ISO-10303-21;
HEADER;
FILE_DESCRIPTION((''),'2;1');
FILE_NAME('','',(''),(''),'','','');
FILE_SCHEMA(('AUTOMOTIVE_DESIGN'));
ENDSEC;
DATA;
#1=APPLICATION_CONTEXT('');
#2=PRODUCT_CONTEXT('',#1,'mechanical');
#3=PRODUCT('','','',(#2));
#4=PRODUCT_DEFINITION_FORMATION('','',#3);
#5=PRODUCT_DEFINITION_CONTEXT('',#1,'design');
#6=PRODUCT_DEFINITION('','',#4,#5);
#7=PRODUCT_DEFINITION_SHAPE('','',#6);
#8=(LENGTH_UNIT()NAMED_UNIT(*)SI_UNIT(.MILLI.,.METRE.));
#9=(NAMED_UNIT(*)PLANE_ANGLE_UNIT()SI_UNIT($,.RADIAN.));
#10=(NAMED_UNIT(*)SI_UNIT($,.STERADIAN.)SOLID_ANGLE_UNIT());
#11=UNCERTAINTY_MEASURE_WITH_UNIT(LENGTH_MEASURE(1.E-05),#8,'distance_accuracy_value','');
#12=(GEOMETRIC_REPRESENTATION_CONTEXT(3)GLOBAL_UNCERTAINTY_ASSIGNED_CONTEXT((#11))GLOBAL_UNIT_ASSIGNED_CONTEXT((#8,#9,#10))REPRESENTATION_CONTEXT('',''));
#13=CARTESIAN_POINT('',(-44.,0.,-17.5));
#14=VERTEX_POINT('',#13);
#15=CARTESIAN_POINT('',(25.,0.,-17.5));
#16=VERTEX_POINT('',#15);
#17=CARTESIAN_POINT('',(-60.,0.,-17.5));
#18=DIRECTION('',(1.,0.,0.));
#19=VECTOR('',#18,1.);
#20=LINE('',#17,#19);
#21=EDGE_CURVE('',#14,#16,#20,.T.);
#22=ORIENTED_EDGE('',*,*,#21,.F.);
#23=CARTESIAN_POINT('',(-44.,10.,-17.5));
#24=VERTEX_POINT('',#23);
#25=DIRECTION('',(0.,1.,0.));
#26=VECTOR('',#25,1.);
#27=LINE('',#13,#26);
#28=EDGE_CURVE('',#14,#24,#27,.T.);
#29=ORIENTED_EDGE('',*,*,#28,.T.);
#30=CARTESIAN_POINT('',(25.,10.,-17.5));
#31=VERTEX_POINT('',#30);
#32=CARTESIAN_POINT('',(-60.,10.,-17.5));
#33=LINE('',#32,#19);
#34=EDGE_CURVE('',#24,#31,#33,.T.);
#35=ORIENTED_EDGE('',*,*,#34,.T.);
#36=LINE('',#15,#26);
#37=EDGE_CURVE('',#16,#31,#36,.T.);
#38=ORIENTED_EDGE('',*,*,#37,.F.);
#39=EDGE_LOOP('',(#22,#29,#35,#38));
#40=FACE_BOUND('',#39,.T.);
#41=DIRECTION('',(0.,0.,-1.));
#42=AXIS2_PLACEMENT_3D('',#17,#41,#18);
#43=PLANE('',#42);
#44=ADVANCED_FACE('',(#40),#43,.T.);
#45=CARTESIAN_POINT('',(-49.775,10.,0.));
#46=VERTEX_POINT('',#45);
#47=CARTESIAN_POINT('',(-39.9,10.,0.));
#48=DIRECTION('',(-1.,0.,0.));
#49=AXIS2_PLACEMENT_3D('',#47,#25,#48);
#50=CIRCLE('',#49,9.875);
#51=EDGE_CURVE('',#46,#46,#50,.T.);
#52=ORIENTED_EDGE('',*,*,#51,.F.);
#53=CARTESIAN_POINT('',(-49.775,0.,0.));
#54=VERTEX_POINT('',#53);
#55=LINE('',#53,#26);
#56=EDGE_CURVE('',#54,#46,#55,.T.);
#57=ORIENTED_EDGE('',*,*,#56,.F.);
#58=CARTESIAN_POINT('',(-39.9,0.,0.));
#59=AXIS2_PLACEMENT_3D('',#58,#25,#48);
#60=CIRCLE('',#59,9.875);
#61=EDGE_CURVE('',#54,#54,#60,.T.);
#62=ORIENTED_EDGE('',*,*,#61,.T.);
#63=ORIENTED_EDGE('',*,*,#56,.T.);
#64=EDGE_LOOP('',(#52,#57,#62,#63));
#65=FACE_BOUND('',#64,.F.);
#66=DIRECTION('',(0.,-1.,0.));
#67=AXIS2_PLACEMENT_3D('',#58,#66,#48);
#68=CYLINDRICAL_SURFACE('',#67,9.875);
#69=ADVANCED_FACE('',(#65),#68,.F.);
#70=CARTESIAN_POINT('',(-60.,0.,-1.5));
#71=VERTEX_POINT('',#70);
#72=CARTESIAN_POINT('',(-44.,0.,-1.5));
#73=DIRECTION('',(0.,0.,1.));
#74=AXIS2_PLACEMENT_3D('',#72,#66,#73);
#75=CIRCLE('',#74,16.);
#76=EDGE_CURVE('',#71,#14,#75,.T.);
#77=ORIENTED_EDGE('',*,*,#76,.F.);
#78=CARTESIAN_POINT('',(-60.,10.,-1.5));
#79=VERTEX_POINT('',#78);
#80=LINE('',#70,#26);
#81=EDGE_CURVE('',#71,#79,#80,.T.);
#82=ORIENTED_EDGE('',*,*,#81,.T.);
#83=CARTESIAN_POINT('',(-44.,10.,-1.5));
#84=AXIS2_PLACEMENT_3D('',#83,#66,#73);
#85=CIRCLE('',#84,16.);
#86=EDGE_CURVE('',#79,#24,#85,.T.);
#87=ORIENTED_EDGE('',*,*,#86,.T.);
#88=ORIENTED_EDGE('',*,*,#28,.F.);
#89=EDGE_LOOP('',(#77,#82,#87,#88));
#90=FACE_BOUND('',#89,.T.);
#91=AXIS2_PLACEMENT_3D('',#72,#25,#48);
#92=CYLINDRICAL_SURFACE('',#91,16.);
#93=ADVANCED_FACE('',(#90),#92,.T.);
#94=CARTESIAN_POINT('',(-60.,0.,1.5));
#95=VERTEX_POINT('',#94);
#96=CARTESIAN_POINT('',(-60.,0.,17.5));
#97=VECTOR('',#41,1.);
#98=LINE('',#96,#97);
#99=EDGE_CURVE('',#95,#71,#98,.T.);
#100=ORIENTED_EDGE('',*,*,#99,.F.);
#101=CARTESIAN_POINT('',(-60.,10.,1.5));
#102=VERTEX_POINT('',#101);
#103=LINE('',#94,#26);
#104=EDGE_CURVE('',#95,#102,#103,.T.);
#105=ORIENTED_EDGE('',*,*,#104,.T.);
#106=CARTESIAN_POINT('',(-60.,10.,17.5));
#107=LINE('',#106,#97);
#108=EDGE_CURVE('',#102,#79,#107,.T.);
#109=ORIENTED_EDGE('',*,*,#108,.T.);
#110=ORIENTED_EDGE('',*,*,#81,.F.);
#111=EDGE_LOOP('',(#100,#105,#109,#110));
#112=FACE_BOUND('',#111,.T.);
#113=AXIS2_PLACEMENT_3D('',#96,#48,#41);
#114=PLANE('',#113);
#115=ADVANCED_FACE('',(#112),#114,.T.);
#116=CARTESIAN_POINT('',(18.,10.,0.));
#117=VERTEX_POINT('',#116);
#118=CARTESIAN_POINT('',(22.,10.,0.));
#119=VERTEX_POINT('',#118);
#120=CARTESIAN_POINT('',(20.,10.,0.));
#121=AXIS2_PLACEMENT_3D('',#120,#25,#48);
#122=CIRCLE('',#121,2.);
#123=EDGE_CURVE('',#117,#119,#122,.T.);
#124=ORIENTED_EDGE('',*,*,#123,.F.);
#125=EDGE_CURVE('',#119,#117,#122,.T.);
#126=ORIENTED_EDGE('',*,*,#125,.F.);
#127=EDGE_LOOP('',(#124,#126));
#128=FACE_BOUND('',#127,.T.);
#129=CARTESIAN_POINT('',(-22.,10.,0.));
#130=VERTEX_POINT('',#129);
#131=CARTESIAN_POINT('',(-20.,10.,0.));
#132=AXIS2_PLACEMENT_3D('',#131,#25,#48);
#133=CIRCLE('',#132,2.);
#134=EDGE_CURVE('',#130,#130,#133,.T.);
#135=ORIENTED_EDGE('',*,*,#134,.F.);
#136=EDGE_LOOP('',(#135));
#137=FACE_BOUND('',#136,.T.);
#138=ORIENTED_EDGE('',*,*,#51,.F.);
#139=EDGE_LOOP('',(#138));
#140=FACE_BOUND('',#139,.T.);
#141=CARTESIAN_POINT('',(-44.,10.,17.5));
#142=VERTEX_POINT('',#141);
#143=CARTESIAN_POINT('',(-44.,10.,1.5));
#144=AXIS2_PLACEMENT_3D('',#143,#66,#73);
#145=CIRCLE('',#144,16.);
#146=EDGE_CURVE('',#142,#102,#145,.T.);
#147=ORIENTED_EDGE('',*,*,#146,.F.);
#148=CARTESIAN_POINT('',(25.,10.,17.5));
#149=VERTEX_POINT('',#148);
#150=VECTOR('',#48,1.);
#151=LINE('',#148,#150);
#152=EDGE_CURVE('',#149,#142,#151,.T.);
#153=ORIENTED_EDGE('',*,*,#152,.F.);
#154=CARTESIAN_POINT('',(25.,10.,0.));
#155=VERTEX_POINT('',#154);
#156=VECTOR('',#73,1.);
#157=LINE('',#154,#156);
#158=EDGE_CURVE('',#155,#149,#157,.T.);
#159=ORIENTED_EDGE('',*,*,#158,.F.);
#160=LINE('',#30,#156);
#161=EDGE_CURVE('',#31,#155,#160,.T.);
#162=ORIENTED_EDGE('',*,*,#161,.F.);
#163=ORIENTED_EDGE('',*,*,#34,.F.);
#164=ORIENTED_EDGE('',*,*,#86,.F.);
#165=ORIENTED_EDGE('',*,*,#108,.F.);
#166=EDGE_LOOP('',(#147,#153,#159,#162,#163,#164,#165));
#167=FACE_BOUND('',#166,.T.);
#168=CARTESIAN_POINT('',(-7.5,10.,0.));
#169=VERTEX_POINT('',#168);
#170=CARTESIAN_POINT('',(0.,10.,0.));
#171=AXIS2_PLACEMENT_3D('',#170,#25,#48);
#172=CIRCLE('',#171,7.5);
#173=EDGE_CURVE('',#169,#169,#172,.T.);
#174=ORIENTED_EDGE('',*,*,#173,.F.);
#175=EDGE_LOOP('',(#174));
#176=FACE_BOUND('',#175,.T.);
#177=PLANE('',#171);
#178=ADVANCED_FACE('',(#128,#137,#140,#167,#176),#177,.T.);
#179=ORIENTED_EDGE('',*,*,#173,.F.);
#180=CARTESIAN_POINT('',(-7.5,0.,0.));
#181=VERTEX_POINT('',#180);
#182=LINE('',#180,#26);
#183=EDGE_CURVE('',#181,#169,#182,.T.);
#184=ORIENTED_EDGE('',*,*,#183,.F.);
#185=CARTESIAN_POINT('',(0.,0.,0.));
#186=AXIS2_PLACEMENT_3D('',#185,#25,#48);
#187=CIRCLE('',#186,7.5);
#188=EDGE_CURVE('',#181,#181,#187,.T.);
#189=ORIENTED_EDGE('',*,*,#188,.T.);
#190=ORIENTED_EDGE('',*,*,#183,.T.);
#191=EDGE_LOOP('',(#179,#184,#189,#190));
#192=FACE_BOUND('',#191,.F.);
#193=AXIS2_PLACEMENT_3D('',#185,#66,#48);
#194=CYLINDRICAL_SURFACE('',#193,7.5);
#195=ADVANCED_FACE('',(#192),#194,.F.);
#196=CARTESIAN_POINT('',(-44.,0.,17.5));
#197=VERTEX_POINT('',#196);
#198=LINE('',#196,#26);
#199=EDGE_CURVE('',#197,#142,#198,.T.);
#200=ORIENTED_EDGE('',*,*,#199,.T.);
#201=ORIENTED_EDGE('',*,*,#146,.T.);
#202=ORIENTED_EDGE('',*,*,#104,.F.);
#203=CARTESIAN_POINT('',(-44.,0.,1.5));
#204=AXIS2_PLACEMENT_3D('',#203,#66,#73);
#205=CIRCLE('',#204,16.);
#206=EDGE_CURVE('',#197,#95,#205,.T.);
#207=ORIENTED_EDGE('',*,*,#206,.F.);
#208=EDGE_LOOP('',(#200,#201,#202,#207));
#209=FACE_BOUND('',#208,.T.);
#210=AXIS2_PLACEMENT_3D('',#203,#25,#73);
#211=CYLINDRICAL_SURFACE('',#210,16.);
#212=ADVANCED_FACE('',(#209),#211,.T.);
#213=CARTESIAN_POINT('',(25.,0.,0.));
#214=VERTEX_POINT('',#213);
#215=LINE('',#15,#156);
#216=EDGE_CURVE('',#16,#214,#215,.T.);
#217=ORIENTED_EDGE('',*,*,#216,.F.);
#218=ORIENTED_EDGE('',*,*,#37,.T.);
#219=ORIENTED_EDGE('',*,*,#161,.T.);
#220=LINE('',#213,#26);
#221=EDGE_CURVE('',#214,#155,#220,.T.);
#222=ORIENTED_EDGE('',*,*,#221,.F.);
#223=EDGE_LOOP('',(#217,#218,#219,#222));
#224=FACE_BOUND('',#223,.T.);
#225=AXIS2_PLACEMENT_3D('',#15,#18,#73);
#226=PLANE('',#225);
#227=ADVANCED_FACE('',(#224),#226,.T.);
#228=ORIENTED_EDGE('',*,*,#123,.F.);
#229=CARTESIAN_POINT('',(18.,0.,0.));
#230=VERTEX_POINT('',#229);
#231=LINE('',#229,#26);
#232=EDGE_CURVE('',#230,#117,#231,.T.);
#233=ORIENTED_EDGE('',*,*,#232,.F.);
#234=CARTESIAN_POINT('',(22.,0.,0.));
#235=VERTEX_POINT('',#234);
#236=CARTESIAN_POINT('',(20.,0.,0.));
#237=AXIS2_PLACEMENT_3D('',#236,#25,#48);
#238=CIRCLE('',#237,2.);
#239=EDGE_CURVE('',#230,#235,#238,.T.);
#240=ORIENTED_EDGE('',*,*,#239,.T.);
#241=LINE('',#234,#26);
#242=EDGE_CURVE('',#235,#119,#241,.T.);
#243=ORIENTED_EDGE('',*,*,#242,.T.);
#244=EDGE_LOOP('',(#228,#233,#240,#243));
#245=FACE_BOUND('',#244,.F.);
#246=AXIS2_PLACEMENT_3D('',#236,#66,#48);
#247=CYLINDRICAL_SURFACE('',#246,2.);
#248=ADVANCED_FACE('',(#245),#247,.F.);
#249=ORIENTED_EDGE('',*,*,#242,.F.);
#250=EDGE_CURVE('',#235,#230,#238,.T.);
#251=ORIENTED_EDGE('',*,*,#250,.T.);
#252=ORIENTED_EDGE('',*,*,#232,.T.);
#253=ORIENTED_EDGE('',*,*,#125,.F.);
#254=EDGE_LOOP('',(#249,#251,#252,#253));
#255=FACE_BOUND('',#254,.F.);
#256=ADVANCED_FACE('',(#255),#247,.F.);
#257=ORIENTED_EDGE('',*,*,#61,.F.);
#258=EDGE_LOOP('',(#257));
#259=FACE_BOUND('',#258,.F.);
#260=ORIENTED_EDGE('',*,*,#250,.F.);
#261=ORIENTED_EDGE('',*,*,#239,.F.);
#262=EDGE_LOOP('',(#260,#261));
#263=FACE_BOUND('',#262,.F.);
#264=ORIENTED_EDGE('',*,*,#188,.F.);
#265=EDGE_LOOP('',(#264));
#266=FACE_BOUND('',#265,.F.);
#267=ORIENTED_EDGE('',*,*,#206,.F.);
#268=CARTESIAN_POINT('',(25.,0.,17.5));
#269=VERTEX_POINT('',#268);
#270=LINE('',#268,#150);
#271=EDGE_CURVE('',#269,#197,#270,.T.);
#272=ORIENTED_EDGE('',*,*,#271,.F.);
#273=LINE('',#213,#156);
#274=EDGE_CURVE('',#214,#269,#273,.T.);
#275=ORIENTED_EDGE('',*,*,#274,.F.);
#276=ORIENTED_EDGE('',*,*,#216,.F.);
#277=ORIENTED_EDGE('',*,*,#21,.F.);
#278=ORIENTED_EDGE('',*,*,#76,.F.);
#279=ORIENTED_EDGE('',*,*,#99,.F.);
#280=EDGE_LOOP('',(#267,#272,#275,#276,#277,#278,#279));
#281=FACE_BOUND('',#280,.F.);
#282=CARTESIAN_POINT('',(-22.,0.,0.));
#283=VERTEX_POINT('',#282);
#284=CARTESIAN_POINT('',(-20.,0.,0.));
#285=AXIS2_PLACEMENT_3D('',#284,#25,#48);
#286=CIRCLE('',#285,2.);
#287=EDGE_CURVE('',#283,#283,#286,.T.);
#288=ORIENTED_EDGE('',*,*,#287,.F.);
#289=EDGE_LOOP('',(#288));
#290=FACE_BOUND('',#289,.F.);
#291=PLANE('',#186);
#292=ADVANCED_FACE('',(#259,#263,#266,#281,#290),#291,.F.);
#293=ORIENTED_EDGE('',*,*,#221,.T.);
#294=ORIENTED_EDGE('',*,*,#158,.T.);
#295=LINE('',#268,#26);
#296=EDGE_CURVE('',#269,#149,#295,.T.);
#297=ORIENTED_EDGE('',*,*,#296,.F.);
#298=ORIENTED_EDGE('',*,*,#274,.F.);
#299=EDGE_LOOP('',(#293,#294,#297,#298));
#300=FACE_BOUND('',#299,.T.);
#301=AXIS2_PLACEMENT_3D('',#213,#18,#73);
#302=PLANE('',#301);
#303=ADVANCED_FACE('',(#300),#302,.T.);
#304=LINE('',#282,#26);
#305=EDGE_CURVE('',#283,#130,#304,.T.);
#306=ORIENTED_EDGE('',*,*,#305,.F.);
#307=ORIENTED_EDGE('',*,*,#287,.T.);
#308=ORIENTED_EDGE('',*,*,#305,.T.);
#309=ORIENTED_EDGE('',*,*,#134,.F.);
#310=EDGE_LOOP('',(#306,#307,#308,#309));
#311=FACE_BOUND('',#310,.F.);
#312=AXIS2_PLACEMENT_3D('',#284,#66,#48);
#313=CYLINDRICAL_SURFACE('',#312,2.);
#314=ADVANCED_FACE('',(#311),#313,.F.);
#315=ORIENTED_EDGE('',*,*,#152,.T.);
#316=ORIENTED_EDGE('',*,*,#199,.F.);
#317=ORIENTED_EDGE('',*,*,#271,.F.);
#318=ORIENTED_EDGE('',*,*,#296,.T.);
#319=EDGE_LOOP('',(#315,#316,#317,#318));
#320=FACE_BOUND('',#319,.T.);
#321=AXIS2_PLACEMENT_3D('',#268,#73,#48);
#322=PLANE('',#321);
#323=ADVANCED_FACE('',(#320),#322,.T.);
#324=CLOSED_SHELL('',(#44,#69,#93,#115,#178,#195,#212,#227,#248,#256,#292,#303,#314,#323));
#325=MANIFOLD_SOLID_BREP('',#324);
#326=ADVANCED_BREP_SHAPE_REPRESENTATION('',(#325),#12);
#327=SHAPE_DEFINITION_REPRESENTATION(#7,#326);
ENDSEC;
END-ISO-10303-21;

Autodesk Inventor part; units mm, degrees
ref_plane "YZ Plane" through (0, 0, 0) normal (1, 0, 0) x (0, 1, 0)
ref_plane "XZ Plane" through (0, 0, 0) normal (0, 1, 0) x (-1, 0, 0)
ref_plane "XY Plane" through (0, 0, 0) normal (0, 0, 1) x (1, 0, 0)
sketch "Sketch1" plane through (0, 0, 0) normal (0, 1, 0) x (-1, 0, 0)
  circle A0 centre (0, 0) radius 4
  circle A1 centre (-20, 0) radius 2
  circle A2 centre (20, 0) radius 2
  circle A3 centre (0, 0) radius 7.5
  line L0 (0, 0) -> (20, 0) construction
  circle A4 centre (0, 0) radius 3.9303 construction
  line L1 (0, 0) -> (39.9, 0) construction
  circle A5 centre (39.9, 0) radius 9.875
  line L2 (-20, 0) -> (-25, 0)
  line L3 (-25, 0) -> (-25, 17.5)
  line L4 (-25, 17.5) -> (60, 17.5)
  line L5 (60, 17.5) -> (60, -17.5)
  line L6 (60, -17.5) -> (-25, -17.5)
  line L7 (-25, -17.5) -> (-25, 17.5)
  dimension "d0" = 8
  dimension "d1" = 39.9
  dimension "d2" = 19.75
  dimension "d3" = 5
  dimension "d4" = 17.5
  dimension "d5" = 85
  dimension "d6" = 35
extrude "Extrusion1" add sketch "Sketch1" along normal blind 10 contours L3 L4 L5 L6 L7
fillet "Fillet1" radius 16 2 edges at (-60, 5, -17.5) (-60, 5, 17.5)
properties part number "Bear_fix"
